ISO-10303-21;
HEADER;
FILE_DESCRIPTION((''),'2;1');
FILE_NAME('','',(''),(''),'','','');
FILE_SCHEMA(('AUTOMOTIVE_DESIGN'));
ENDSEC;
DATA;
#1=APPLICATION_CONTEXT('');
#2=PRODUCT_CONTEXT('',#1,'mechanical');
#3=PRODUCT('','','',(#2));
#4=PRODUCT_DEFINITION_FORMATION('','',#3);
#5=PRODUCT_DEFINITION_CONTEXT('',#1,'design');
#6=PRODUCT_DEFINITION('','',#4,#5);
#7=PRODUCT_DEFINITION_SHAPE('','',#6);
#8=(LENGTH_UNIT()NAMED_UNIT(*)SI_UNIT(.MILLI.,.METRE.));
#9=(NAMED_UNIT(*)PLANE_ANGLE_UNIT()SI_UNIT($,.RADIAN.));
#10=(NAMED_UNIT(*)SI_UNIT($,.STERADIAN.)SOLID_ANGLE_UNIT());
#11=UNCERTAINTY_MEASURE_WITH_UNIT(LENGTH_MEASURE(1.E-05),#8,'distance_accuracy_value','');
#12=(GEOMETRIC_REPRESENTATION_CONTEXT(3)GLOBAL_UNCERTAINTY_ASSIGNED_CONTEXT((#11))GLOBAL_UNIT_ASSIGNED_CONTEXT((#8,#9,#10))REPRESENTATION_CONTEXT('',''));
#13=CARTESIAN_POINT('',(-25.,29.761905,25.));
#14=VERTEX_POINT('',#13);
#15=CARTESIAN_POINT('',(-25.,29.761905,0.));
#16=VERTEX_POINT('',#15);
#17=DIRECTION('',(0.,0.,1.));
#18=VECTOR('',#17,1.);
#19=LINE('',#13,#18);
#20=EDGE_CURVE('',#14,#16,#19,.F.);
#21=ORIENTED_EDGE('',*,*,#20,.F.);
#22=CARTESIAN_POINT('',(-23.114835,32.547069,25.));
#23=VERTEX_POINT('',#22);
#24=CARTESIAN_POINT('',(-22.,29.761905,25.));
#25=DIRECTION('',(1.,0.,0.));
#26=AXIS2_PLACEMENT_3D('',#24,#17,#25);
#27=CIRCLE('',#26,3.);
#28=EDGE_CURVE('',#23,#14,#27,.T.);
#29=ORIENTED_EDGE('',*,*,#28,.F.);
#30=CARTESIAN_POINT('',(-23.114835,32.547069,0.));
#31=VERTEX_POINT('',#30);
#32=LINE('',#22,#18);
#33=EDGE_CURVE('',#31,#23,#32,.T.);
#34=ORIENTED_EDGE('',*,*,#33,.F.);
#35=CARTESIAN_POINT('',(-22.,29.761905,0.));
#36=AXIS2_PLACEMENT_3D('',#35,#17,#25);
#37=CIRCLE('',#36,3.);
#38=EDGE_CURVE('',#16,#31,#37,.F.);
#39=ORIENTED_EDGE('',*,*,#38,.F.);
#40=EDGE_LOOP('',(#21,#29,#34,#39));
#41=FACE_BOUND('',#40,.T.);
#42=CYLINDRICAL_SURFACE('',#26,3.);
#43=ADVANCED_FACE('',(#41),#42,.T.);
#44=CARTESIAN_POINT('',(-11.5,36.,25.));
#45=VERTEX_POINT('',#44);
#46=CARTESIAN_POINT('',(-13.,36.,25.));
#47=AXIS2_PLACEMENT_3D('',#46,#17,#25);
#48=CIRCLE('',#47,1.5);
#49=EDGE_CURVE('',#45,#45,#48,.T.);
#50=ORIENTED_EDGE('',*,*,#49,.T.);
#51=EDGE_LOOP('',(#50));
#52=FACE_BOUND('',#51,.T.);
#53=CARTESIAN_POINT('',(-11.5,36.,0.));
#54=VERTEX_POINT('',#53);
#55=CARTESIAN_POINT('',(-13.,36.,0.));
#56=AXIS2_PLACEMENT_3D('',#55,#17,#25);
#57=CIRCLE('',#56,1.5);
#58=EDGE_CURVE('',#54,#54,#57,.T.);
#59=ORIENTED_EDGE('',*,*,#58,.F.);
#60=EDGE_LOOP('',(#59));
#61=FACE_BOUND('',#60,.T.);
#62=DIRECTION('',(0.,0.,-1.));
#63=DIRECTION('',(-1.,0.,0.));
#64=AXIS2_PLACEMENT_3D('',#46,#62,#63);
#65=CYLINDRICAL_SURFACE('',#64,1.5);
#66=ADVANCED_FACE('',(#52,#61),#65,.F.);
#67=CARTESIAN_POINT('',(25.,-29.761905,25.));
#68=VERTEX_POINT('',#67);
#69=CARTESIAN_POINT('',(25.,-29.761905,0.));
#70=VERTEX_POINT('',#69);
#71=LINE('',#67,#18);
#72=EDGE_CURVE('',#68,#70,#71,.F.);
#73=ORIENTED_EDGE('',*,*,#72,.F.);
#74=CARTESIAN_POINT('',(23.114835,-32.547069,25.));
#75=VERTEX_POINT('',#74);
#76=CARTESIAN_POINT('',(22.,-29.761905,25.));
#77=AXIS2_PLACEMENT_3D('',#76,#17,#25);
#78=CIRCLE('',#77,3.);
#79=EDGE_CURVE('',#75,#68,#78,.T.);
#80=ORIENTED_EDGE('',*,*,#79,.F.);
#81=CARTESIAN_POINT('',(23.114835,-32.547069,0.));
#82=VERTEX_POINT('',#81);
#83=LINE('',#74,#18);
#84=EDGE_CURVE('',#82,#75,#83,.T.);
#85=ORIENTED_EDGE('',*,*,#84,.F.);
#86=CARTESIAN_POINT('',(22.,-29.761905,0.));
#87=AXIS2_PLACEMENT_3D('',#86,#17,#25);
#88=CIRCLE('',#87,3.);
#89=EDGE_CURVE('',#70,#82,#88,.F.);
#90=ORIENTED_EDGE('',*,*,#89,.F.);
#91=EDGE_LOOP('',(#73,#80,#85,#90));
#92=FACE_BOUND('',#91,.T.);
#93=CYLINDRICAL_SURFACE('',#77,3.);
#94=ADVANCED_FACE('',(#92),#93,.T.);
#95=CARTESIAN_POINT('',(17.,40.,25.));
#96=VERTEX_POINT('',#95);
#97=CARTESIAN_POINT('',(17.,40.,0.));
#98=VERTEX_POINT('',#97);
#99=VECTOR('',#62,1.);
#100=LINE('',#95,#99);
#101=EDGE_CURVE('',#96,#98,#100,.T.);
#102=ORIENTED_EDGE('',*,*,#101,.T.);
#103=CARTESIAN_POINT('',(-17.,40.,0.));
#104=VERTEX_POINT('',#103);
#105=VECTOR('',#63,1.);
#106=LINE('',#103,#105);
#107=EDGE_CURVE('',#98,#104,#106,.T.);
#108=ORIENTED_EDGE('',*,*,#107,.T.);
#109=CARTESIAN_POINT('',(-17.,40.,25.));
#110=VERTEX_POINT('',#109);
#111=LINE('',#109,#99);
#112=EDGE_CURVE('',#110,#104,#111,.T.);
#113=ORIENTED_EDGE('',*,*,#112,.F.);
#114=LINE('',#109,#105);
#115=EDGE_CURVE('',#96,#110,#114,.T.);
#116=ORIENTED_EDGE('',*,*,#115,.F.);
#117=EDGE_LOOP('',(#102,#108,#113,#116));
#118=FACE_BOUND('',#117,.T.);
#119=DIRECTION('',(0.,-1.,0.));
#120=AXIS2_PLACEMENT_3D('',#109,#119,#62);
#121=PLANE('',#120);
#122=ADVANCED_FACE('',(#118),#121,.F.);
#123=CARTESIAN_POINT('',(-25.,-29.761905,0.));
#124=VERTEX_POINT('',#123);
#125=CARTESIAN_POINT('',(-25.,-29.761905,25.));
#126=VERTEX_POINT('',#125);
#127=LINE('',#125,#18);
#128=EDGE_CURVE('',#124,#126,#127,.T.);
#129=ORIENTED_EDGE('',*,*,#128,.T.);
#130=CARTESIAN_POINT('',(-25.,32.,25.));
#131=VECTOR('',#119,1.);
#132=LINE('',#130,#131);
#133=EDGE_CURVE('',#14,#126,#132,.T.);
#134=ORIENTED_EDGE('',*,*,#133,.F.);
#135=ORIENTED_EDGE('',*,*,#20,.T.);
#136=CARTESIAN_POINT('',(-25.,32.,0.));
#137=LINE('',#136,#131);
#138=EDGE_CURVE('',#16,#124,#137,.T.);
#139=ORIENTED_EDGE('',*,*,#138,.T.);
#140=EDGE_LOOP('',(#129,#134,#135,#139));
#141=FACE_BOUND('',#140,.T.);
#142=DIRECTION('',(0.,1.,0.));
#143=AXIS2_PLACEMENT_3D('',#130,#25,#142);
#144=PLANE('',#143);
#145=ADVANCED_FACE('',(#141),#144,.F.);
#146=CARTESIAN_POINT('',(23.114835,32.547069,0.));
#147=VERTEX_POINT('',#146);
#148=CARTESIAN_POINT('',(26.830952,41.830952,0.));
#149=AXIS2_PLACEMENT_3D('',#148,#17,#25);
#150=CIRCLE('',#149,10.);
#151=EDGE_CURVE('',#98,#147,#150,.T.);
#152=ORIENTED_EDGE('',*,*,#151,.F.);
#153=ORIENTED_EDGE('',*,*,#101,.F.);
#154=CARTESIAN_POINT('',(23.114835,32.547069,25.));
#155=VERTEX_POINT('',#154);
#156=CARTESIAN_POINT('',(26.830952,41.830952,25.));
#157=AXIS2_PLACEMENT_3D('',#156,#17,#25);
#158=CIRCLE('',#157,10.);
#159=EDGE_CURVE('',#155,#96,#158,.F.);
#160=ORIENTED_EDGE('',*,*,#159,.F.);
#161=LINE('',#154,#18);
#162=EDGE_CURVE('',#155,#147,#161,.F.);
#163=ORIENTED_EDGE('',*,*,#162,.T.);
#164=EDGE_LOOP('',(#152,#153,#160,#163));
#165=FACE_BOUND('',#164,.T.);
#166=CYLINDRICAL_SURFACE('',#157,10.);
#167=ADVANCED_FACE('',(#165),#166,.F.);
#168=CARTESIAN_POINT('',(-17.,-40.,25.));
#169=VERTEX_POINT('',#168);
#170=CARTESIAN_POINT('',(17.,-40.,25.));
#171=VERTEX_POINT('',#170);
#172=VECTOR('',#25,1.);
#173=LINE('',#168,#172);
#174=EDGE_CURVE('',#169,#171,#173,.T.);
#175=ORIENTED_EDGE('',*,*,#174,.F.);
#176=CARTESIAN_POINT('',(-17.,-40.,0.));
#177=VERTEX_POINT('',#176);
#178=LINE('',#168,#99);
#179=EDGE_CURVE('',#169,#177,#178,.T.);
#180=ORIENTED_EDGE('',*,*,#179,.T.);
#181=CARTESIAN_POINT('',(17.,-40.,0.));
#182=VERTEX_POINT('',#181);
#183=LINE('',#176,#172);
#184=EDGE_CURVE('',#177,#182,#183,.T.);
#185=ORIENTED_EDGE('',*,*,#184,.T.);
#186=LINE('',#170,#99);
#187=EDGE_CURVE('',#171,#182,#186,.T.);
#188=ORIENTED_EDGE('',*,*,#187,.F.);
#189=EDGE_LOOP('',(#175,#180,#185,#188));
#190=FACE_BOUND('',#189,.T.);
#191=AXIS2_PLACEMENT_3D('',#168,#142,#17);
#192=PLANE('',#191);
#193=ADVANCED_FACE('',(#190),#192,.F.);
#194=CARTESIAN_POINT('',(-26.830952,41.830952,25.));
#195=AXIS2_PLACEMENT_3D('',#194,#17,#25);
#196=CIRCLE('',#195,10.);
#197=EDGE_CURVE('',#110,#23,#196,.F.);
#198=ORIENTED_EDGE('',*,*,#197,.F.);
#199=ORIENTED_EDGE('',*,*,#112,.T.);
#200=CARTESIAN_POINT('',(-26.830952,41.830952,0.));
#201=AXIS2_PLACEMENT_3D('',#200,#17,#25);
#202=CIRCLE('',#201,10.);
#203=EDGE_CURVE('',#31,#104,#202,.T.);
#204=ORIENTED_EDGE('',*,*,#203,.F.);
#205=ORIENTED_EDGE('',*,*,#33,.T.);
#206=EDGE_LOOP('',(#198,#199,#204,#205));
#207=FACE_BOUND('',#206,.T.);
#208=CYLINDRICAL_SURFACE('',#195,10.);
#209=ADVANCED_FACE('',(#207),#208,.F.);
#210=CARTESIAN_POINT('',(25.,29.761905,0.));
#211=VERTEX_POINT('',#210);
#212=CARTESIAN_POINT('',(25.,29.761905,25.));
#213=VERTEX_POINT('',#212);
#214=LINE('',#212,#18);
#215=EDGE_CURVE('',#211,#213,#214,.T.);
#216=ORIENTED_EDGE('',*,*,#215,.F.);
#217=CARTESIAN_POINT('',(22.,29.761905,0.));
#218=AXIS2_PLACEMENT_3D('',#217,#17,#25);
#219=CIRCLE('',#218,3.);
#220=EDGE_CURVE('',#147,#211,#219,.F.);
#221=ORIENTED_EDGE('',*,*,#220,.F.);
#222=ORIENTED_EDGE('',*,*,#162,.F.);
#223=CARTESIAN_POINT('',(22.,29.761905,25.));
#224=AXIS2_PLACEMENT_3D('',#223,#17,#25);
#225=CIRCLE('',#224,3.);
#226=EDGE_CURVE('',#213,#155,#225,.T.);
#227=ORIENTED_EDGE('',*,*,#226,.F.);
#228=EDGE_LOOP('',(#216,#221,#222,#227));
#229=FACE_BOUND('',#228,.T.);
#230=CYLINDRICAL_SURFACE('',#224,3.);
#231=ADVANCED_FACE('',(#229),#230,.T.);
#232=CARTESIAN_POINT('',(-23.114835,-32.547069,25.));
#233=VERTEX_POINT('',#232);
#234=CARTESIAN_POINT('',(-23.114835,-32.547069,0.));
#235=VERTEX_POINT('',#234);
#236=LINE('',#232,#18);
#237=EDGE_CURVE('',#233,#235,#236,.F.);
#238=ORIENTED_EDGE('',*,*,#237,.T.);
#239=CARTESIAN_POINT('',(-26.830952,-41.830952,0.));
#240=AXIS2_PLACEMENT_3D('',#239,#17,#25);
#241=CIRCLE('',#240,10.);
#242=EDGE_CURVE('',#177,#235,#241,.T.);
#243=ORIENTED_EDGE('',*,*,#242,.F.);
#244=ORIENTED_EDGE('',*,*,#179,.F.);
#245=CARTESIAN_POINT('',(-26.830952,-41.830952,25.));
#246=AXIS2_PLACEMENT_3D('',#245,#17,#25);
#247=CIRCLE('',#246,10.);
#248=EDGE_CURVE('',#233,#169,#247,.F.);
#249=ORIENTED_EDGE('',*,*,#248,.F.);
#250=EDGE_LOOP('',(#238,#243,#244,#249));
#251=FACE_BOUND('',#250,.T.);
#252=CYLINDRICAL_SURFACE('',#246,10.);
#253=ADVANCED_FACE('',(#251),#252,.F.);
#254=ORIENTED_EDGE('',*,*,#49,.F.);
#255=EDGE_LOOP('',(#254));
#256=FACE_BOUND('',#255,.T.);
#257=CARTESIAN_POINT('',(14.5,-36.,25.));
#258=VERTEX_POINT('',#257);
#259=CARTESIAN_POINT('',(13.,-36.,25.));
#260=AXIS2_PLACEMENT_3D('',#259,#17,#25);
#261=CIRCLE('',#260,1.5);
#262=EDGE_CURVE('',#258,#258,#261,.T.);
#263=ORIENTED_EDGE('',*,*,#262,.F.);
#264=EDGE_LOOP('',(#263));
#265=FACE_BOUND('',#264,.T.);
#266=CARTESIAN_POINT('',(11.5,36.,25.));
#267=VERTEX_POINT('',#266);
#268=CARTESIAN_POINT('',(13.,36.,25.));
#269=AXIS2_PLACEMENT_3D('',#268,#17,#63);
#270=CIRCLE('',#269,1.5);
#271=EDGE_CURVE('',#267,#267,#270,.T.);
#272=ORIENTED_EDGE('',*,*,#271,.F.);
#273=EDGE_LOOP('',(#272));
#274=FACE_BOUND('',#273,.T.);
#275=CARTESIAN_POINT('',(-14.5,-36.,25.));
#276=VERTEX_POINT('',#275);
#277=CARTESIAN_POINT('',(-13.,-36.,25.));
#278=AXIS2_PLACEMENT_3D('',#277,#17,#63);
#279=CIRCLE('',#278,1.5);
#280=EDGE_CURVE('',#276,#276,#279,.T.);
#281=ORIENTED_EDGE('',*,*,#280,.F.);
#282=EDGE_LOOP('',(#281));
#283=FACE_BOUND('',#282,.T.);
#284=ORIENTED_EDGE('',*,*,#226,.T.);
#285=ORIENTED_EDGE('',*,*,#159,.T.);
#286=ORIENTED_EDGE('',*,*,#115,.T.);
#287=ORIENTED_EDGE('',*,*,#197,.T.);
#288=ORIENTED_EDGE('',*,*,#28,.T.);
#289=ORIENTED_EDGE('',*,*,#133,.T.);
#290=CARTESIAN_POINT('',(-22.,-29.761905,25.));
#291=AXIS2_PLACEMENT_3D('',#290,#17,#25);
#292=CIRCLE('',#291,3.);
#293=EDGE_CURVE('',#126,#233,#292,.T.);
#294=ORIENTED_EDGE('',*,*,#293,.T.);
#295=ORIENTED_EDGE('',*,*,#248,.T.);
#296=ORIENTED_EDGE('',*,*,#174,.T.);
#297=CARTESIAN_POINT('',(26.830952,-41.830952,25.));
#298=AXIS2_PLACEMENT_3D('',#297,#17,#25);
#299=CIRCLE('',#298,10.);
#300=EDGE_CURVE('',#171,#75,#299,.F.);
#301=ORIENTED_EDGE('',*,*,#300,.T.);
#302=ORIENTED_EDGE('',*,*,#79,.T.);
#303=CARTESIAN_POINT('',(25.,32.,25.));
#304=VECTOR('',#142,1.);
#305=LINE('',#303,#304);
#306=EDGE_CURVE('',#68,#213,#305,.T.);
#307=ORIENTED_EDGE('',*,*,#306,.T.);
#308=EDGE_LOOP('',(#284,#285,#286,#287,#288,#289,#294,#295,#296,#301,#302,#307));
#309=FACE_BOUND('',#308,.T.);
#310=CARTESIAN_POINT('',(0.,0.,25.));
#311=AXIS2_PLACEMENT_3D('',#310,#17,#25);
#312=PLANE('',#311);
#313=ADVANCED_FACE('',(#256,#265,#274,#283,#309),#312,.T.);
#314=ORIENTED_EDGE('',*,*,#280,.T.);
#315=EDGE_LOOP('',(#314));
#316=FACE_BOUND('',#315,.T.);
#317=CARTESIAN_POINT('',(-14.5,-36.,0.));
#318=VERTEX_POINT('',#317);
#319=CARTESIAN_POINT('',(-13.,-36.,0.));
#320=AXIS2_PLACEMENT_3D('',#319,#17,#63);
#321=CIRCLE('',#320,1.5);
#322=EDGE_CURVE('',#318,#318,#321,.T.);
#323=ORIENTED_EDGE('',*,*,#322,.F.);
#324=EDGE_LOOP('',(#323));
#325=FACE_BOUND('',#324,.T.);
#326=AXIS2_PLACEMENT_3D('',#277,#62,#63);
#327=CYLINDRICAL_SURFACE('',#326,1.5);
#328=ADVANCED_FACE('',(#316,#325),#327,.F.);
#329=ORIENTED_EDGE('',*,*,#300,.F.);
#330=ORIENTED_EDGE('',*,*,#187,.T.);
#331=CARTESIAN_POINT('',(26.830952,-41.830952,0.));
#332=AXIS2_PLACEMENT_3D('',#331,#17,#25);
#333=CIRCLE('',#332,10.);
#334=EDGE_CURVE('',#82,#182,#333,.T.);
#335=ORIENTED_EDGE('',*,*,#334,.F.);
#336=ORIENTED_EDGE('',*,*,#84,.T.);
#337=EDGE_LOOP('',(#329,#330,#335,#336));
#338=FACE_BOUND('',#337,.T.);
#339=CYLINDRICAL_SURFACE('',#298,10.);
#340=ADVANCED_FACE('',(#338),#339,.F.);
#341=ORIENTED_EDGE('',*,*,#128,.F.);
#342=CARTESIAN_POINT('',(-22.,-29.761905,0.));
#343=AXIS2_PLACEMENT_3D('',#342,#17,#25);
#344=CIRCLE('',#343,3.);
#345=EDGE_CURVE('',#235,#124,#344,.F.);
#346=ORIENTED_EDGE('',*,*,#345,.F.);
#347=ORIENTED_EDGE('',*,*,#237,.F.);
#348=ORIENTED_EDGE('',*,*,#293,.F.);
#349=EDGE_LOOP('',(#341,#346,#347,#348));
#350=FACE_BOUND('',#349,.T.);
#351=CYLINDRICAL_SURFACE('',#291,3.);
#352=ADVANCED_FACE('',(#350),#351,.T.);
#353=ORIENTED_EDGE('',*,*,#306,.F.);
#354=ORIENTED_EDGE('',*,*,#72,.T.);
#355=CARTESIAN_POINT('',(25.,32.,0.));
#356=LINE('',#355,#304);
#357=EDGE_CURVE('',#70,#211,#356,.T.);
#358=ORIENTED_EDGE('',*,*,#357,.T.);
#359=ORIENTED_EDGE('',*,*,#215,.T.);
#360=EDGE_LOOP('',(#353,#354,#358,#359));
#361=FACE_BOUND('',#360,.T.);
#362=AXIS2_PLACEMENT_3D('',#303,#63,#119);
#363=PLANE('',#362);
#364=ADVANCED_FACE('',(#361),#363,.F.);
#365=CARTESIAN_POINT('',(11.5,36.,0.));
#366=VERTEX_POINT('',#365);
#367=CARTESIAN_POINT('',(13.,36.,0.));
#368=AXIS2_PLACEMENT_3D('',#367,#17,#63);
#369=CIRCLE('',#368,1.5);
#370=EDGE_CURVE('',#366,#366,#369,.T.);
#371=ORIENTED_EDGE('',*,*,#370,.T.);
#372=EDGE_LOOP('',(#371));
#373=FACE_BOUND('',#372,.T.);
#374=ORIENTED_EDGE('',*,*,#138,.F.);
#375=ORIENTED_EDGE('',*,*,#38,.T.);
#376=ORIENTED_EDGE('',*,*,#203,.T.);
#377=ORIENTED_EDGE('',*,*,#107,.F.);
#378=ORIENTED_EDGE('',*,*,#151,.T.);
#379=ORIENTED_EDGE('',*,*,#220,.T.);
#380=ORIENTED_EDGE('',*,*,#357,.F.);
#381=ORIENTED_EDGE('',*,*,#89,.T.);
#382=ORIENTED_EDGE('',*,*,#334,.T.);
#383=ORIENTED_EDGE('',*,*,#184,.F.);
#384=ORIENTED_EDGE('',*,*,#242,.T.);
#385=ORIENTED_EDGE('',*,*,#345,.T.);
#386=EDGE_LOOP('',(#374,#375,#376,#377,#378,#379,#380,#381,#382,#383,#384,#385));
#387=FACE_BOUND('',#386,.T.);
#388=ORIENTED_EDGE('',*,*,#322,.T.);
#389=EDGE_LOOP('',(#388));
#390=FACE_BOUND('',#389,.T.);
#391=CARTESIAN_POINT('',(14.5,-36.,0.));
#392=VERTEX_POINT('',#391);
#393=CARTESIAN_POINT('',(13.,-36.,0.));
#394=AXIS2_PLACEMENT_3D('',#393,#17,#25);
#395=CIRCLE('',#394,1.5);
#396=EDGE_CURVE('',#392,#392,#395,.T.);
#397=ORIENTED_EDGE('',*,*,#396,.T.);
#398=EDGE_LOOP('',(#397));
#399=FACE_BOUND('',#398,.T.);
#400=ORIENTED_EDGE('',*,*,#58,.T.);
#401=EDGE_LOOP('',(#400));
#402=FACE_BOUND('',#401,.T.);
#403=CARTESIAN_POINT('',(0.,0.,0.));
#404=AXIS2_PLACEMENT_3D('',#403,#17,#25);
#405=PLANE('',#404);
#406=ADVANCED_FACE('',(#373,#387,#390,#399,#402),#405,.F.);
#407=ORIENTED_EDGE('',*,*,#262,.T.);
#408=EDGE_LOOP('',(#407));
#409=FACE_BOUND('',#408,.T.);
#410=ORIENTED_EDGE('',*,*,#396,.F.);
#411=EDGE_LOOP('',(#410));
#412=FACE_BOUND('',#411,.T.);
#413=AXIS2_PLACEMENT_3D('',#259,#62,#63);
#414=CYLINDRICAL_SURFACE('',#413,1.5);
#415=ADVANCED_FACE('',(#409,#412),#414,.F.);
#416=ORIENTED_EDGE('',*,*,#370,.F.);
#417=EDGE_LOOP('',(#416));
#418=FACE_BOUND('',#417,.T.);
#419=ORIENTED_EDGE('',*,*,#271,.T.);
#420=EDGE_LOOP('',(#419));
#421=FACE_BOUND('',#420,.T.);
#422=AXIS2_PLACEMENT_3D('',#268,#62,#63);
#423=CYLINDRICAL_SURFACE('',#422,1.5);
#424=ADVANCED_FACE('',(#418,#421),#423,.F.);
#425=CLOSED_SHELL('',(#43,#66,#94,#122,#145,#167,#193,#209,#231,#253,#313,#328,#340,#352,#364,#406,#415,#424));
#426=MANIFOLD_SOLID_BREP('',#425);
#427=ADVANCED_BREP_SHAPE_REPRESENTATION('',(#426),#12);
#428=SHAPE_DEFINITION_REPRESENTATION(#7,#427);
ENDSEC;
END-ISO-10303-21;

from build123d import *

# Parameters (mm, degrees)
SKETCH_1_R      = 1.5
EXTRUDE_1_DEPTH = 25
FILLET_1_R      = 10
FILLET_2_R      = 3


with BuildPart() as part:
    # 草图1 → 凸台-拉伸1 (new body)
    with BuildSketch(Plane.XY):
        Polygon((-17, 40), (17, 40), (17, 32), (25, 32), (25, -32), (17, -32), (17, -40), (-17, -40), (-17, -32), (-25, -32), (-25, 32), (-17, 32), align=None)
        with Locations((-13, 36)):
            Circle(SKETCH_1_R, mode=Mode.SUBTRACT)
        with Locations(Location((13, 36, 0), (0, 0, 180))):
            Circle(SKETCH_1_R, mode=Mode.SUBTRACT)
        with Locations(Location((-13, -36, 0), (0, 0, 180))):
            Circle(SKETCH_1_R, mode=Mode.SUBTRACT)
        with Locations((13, -36)):
            Circle(SKETCH_1_R, mode=Mode.SUBTRACT)
    extrude(amount=EXTRUDE_1_DEPTH)

    # 圆角1
    # the kernel refuses this fillet: 10 mm, written as the material it adds along each edge
    with BuildSketch(Plane(origin=(17, 32, 0), x_dir=(0, 1, 0), z_dir=(0, 0, 1)), Plane(origin=(-17, 32, 0), x_dir=(-1, 0, 0), z_dir=(0, 0, 1)), Plane(origin=(17, -32, 0), x_dir=(1, 0, 0), z_dir=(0, 0, 1)), Plane(origin=(-17, -32, 0), x_dir=(0, -1, 0), z_dir=(0, 0, 1))) as fillet_1_piece_1:
        with BuildLine():
            CenterArc((9.830951895, -9.830951895), FILLET_1_R, 100.550098012, 68.899803976)
            Line((0, -8), (0, 0))
            Line((0, 0), (8, 0))
        make_face()
    extrude(amount=25)

    # 圆角2
    fillet_2_edges = [part.edges().sort_by_distance(p)[0] for p in [
        (25, 32, 12.5),
        (25, -32, 12.5),
        (-25, -32, 12.5),
        (-25, 32, 12.5),
    ]]
    fillet(fillet_2_edges, radius=FILLET_2_R)


solid = part.part
